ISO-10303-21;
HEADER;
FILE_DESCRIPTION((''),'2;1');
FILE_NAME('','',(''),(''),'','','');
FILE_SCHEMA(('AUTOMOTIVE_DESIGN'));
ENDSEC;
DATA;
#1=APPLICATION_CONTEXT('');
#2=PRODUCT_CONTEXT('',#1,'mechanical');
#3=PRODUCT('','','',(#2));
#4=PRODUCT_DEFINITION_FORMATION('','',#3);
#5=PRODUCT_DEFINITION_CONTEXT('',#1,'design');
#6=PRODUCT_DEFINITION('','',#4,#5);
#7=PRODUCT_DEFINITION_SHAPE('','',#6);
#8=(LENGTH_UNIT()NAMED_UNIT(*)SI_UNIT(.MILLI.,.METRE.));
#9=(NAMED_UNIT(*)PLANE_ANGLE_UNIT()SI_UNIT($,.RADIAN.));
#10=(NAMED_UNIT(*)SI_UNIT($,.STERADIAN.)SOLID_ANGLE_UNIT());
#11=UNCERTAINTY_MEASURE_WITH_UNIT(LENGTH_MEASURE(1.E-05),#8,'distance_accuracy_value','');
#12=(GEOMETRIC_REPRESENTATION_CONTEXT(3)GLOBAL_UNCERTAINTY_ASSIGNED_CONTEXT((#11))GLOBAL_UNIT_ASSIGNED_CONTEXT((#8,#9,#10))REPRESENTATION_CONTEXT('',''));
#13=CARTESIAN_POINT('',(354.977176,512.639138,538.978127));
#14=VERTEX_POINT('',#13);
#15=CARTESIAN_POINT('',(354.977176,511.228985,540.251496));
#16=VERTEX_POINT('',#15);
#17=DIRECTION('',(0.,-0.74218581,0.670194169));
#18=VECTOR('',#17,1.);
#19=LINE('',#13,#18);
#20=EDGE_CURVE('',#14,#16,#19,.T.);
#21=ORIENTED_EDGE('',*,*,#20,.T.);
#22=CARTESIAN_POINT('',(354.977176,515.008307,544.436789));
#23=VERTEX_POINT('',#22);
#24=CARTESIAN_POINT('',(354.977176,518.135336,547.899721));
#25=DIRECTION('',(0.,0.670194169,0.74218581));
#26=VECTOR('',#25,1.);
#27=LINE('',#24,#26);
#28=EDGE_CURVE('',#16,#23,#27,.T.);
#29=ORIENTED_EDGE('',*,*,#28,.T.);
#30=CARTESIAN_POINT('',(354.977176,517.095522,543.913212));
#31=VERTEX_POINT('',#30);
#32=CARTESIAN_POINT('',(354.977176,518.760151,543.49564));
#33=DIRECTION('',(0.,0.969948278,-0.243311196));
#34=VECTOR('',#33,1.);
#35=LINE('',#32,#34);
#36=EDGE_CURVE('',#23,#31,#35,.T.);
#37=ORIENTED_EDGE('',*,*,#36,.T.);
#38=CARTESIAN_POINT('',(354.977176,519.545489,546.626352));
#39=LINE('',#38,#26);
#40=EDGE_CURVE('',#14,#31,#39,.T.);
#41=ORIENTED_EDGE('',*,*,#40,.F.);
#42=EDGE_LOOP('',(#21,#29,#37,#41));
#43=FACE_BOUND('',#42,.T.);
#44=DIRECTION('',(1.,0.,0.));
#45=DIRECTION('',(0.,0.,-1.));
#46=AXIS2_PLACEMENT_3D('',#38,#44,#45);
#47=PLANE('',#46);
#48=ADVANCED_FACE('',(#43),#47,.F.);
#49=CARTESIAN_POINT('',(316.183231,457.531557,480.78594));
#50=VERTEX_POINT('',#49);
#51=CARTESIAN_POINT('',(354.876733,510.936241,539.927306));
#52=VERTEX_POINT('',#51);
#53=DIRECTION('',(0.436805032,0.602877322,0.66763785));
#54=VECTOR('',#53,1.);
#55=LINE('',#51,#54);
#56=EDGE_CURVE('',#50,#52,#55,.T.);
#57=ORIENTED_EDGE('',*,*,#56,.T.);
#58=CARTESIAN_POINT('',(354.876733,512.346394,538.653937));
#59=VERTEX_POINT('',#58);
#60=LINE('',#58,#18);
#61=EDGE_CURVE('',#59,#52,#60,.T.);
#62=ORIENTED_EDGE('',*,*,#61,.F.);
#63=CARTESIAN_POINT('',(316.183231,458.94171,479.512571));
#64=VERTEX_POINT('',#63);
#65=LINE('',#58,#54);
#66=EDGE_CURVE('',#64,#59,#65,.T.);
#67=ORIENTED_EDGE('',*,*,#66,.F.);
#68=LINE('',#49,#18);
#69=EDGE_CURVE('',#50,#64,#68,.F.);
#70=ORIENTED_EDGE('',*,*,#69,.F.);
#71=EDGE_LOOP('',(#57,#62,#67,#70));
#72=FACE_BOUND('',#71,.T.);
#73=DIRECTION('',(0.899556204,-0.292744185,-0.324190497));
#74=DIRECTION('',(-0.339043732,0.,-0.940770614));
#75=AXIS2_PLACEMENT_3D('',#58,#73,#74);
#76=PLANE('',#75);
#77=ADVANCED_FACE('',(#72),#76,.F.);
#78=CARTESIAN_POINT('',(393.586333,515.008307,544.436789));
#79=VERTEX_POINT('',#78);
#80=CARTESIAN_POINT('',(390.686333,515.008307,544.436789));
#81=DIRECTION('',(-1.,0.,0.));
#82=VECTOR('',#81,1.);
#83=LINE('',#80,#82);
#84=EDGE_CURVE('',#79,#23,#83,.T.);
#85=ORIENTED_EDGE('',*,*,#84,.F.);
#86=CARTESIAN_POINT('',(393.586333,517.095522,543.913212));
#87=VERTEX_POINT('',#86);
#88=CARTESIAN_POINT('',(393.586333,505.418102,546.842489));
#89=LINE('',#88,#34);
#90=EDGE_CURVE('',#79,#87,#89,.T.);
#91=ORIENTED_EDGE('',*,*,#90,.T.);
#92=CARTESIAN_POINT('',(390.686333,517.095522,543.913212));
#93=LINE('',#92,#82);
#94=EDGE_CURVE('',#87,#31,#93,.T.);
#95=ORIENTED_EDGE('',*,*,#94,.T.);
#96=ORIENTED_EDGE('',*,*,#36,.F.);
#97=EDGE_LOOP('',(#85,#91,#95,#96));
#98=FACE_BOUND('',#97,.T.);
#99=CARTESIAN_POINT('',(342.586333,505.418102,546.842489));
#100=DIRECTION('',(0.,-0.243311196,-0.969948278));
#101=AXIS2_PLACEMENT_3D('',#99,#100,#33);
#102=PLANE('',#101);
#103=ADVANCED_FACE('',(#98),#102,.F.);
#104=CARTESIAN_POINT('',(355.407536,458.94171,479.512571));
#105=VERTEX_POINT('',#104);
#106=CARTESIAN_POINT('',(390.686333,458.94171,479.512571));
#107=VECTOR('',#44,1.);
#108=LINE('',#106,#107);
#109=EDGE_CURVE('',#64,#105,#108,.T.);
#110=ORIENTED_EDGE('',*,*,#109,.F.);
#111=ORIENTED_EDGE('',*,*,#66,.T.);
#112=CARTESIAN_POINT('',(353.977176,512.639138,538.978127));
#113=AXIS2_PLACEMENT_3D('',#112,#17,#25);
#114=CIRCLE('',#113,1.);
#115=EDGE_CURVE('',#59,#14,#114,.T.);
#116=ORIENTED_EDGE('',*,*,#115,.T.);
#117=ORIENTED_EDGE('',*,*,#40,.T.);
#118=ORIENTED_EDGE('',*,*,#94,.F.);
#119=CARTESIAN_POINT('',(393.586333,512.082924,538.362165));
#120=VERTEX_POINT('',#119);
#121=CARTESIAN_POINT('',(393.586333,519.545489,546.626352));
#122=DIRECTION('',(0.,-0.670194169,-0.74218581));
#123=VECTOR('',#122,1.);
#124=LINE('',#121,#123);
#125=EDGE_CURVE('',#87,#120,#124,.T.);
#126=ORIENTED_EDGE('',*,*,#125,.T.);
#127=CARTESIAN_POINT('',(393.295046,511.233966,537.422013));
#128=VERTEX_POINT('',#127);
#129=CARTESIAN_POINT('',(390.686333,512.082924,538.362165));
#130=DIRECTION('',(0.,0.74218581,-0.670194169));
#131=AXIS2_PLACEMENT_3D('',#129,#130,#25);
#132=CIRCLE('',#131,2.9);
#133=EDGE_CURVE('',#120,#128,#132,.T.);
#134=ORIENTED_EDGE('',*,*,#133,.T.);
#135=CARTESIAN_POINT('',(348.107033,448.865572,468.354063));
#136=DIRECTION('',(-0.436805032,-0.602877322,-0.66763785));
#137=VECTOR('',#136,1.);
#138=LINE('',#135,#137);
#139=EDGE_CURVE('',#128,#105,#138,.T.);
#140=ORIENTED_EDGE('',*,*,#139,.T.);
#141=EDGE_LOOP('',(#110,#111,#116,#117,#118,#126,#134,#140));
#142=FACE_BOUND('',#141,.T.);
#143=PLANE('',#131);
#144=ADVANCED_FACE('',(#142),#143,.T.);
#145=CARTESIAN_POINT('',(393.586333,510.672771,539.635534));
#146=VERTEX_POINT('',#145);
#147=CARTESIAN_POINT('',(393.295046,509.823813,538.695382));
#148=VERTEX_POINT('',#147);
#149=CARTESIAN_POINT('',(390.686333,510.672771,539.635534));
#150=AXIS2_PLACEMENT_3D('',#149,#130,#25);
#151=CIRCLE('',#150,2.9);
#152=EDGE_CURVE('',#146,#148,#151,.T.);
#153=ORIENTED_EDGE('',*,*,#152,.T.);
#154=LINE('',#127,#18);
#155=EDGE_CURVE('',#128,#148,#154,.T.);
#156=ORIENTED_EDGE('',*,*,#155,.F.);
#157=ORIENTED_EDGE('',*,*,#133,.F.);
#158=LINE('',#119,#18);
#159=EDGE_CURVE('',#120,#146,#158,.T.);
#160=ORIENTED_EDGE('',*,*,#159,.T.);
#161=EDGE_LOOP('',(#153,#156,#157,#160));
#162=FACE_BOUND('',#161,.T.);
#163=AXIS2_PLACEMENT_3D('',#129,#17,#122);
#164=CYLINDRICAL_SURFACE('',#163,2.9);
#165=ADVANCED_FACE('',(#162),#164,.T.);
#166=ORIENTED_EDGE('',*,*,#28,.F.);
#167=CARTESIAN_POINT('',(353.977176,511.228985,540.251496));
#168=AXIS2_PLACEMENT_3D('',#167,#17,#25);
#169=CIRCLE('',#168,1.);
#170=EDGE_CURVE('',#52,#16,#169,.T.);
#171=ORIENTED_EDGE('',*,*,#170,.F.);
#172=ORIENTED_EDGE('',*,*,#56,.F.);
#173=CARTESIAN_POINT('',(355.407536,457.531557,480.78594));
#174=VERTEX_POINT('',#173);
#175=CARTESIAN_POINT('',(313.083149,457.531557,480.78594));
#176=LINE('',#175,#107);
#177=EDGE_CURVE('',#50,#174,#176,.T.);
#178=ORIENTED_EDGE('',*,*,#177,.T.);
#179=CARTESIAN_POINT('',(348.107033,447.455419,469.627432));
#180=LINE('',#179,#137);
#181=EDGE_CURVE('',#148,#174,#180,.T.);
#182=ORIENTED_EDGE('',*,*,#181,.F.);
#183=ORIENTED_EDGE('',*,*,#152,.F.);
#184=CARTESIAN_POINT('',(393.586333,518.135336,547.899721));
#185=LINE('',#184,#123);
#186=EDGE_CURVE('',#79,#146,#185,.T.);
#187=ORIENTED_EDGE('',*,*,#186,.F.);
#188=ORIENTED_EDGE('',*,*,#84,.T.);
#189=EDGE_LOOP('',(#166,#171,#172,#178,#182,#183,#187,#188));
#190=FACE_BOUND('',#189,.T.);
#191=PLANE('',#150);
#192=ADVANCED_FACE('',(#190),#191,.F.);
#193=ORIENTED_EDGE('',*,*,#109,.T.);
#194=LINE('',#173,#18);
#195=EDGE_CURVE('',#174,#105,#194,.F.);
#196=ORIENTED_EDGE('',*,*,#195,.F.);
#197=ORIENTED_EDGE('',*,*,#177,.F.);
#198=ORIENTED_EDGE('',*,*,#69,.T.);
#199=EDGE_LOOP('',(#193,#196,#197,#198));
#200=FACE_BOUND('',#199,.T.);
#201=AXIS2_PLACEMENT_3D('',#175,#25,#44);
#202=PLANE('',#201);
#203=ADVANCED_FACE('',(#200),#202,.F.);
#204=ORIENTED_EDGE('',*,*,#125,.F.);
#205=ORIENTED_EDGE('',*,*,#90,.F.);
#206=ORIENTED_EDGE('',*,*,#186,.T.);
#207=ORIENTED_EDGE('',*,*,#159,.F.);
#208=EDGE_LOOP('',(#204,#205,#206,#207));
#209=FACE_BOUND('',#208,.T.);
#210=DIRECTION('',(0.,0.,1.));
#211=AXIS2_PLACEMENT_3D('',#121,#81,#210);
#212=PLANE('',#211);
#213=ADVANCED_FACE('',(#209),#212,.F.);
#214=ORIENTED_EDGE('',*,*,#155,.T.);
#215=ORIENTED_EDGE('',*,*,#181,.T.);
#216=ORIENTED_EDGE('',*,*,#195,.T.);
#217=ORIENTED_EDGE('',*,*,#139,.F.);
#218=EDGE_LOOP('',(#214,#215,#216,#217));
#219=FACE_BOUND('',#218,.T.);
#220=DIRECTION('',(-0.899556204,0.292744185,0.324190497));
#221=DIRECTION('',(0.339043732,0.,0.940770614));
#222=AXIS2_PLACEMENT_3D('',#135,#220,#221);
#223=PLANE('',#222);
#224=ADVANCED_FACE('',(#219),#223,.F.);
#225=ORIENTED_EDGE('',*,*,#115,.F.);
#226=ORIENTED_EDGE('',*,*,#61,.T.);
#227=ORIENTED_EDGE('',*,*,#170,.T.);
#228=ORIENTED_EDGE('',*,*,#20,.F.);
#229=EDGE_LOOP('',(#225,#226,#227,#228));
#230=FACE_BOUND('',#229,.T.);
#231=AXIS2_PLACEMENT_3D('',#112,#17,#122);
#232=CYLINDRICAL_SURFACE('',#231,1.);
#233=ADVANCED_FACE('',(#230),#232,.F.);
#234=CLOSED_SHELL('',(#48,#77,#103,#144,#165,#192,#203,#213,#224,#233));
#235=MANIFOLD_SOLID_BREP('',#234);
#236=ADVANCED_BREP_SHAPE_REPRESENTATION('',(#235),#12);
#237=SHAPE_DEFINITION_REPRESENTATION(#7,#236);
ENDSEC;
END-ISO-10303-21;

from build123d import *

# Parameters (mm, degrees)
BASE_FLANGE1_DEPTH     = 1.9
CUT_EXTRUDE4_DEPTH     = 51
CUT_EXTRUDE5_DEPTH     = 71
CUT_EXTRUDE6_START     = 657.08317619
CUT_EXTRUDE6_OUTLINE_W = 45
CUT_EXTRUDE6_OUTLINE_H = 5
CUT_EXTRUDE6_DEPTH     = 6.384307163


# Read off the part's stored shape, not the designer's step: Cut-Extrude6
# Sheet-metal steps are written as plain solids
with BuildPart() as part:
    # Sketch2 → Base-Flange1 (new body)
    with BuildSketch(Plane(origin=(0, 12.879518456, -11.630211804), x_dir=(1, 0, 0), z_dir=(0, 0.7421858097500026, -0.6701941687345042))):
        with BuildLine():
            Line((393.586333182, -753.894678625), (393.586333182, -742.759749552))
            ThreePointArc((393.586333182, -742.759749552), (393.512573412, -742.109852512), (393.295046173, -741.493014958))
            Line((393.295046173, -741.493014958), (348.107032655, -648.432828145))
            Line((348.107032655, -648.432828145), (308.882727398, -648.432828145))
            Line((308.882727398, -648.432828145), (354.876732599, -743.152874081))
            ThreePointArc((354.876732599, -743.152874081), (354.951741991, -743.365576685), (354.977176395, -743.589679113))
            Line((354.977176395, -743.589679113), (354.977176395, -753.894678625))
            Line((354.977176395, -753.894678625), (393.586333182, -753.894678625))
        make_face()
    extrude(amount=BASE_FLANGE1_DEPTH)

    # Sketch7 → Cut-Extrude4 (cut)
    with BuildSketch(Plane(origin=(393.586333182, 0, 0), x_dir=(0, 0, -1), z_dir=(1, 0, 0))):
        Polygon((-546.842488726, 505.418101773), (-542.81093091, 521.489711401), (-552.083782305, 523.815803023), align=None)
    extrude(amount=-CUT_EXTRUDE4_DEPTH, mode=Mode.SUBTRACT)

    # Sketch8 → Cut-Extrude5 (cut)
    with BuildSketch(Plane(origin=(367.203150583, 992.710115794, 1099.346123122), x_dir=(0, 0.9994421284849351, 0.03339808092544755), z_dir=(-1, 0, 0))):
        Polygon((-558.189174553, 593.766016484), (-559.014569405, 618.466070053), (-566.956297266, 616.781727113), (-568.023912054, 608.400656093), align=None)
    extrude(amount=CUT_EXTRUDE5_DEPTH, mode=Mode.SUBTRACT)

    # Cut-Extrude6 outline → Cut-Extrude6 (cut)
    with BuildSketch(Plane(origin=(0, 0, 0), x_dir=(1, 0, 0), z_dir=(0, 0.6701941687345039, 0.7421858097500029)).offset(CUT_EXTRUDE6_START)):
        with Locations((334.5, 18.5)):
            Rectangle(CUT_EXTRUDE6_OUTLINE_W, CUT_EXTRUDE6_OUTLINE_H)
    extrude(amount=CUT_EXTRUDE6_DEPTH, mode=Mode.SUBTRACT)


solid = part.part
